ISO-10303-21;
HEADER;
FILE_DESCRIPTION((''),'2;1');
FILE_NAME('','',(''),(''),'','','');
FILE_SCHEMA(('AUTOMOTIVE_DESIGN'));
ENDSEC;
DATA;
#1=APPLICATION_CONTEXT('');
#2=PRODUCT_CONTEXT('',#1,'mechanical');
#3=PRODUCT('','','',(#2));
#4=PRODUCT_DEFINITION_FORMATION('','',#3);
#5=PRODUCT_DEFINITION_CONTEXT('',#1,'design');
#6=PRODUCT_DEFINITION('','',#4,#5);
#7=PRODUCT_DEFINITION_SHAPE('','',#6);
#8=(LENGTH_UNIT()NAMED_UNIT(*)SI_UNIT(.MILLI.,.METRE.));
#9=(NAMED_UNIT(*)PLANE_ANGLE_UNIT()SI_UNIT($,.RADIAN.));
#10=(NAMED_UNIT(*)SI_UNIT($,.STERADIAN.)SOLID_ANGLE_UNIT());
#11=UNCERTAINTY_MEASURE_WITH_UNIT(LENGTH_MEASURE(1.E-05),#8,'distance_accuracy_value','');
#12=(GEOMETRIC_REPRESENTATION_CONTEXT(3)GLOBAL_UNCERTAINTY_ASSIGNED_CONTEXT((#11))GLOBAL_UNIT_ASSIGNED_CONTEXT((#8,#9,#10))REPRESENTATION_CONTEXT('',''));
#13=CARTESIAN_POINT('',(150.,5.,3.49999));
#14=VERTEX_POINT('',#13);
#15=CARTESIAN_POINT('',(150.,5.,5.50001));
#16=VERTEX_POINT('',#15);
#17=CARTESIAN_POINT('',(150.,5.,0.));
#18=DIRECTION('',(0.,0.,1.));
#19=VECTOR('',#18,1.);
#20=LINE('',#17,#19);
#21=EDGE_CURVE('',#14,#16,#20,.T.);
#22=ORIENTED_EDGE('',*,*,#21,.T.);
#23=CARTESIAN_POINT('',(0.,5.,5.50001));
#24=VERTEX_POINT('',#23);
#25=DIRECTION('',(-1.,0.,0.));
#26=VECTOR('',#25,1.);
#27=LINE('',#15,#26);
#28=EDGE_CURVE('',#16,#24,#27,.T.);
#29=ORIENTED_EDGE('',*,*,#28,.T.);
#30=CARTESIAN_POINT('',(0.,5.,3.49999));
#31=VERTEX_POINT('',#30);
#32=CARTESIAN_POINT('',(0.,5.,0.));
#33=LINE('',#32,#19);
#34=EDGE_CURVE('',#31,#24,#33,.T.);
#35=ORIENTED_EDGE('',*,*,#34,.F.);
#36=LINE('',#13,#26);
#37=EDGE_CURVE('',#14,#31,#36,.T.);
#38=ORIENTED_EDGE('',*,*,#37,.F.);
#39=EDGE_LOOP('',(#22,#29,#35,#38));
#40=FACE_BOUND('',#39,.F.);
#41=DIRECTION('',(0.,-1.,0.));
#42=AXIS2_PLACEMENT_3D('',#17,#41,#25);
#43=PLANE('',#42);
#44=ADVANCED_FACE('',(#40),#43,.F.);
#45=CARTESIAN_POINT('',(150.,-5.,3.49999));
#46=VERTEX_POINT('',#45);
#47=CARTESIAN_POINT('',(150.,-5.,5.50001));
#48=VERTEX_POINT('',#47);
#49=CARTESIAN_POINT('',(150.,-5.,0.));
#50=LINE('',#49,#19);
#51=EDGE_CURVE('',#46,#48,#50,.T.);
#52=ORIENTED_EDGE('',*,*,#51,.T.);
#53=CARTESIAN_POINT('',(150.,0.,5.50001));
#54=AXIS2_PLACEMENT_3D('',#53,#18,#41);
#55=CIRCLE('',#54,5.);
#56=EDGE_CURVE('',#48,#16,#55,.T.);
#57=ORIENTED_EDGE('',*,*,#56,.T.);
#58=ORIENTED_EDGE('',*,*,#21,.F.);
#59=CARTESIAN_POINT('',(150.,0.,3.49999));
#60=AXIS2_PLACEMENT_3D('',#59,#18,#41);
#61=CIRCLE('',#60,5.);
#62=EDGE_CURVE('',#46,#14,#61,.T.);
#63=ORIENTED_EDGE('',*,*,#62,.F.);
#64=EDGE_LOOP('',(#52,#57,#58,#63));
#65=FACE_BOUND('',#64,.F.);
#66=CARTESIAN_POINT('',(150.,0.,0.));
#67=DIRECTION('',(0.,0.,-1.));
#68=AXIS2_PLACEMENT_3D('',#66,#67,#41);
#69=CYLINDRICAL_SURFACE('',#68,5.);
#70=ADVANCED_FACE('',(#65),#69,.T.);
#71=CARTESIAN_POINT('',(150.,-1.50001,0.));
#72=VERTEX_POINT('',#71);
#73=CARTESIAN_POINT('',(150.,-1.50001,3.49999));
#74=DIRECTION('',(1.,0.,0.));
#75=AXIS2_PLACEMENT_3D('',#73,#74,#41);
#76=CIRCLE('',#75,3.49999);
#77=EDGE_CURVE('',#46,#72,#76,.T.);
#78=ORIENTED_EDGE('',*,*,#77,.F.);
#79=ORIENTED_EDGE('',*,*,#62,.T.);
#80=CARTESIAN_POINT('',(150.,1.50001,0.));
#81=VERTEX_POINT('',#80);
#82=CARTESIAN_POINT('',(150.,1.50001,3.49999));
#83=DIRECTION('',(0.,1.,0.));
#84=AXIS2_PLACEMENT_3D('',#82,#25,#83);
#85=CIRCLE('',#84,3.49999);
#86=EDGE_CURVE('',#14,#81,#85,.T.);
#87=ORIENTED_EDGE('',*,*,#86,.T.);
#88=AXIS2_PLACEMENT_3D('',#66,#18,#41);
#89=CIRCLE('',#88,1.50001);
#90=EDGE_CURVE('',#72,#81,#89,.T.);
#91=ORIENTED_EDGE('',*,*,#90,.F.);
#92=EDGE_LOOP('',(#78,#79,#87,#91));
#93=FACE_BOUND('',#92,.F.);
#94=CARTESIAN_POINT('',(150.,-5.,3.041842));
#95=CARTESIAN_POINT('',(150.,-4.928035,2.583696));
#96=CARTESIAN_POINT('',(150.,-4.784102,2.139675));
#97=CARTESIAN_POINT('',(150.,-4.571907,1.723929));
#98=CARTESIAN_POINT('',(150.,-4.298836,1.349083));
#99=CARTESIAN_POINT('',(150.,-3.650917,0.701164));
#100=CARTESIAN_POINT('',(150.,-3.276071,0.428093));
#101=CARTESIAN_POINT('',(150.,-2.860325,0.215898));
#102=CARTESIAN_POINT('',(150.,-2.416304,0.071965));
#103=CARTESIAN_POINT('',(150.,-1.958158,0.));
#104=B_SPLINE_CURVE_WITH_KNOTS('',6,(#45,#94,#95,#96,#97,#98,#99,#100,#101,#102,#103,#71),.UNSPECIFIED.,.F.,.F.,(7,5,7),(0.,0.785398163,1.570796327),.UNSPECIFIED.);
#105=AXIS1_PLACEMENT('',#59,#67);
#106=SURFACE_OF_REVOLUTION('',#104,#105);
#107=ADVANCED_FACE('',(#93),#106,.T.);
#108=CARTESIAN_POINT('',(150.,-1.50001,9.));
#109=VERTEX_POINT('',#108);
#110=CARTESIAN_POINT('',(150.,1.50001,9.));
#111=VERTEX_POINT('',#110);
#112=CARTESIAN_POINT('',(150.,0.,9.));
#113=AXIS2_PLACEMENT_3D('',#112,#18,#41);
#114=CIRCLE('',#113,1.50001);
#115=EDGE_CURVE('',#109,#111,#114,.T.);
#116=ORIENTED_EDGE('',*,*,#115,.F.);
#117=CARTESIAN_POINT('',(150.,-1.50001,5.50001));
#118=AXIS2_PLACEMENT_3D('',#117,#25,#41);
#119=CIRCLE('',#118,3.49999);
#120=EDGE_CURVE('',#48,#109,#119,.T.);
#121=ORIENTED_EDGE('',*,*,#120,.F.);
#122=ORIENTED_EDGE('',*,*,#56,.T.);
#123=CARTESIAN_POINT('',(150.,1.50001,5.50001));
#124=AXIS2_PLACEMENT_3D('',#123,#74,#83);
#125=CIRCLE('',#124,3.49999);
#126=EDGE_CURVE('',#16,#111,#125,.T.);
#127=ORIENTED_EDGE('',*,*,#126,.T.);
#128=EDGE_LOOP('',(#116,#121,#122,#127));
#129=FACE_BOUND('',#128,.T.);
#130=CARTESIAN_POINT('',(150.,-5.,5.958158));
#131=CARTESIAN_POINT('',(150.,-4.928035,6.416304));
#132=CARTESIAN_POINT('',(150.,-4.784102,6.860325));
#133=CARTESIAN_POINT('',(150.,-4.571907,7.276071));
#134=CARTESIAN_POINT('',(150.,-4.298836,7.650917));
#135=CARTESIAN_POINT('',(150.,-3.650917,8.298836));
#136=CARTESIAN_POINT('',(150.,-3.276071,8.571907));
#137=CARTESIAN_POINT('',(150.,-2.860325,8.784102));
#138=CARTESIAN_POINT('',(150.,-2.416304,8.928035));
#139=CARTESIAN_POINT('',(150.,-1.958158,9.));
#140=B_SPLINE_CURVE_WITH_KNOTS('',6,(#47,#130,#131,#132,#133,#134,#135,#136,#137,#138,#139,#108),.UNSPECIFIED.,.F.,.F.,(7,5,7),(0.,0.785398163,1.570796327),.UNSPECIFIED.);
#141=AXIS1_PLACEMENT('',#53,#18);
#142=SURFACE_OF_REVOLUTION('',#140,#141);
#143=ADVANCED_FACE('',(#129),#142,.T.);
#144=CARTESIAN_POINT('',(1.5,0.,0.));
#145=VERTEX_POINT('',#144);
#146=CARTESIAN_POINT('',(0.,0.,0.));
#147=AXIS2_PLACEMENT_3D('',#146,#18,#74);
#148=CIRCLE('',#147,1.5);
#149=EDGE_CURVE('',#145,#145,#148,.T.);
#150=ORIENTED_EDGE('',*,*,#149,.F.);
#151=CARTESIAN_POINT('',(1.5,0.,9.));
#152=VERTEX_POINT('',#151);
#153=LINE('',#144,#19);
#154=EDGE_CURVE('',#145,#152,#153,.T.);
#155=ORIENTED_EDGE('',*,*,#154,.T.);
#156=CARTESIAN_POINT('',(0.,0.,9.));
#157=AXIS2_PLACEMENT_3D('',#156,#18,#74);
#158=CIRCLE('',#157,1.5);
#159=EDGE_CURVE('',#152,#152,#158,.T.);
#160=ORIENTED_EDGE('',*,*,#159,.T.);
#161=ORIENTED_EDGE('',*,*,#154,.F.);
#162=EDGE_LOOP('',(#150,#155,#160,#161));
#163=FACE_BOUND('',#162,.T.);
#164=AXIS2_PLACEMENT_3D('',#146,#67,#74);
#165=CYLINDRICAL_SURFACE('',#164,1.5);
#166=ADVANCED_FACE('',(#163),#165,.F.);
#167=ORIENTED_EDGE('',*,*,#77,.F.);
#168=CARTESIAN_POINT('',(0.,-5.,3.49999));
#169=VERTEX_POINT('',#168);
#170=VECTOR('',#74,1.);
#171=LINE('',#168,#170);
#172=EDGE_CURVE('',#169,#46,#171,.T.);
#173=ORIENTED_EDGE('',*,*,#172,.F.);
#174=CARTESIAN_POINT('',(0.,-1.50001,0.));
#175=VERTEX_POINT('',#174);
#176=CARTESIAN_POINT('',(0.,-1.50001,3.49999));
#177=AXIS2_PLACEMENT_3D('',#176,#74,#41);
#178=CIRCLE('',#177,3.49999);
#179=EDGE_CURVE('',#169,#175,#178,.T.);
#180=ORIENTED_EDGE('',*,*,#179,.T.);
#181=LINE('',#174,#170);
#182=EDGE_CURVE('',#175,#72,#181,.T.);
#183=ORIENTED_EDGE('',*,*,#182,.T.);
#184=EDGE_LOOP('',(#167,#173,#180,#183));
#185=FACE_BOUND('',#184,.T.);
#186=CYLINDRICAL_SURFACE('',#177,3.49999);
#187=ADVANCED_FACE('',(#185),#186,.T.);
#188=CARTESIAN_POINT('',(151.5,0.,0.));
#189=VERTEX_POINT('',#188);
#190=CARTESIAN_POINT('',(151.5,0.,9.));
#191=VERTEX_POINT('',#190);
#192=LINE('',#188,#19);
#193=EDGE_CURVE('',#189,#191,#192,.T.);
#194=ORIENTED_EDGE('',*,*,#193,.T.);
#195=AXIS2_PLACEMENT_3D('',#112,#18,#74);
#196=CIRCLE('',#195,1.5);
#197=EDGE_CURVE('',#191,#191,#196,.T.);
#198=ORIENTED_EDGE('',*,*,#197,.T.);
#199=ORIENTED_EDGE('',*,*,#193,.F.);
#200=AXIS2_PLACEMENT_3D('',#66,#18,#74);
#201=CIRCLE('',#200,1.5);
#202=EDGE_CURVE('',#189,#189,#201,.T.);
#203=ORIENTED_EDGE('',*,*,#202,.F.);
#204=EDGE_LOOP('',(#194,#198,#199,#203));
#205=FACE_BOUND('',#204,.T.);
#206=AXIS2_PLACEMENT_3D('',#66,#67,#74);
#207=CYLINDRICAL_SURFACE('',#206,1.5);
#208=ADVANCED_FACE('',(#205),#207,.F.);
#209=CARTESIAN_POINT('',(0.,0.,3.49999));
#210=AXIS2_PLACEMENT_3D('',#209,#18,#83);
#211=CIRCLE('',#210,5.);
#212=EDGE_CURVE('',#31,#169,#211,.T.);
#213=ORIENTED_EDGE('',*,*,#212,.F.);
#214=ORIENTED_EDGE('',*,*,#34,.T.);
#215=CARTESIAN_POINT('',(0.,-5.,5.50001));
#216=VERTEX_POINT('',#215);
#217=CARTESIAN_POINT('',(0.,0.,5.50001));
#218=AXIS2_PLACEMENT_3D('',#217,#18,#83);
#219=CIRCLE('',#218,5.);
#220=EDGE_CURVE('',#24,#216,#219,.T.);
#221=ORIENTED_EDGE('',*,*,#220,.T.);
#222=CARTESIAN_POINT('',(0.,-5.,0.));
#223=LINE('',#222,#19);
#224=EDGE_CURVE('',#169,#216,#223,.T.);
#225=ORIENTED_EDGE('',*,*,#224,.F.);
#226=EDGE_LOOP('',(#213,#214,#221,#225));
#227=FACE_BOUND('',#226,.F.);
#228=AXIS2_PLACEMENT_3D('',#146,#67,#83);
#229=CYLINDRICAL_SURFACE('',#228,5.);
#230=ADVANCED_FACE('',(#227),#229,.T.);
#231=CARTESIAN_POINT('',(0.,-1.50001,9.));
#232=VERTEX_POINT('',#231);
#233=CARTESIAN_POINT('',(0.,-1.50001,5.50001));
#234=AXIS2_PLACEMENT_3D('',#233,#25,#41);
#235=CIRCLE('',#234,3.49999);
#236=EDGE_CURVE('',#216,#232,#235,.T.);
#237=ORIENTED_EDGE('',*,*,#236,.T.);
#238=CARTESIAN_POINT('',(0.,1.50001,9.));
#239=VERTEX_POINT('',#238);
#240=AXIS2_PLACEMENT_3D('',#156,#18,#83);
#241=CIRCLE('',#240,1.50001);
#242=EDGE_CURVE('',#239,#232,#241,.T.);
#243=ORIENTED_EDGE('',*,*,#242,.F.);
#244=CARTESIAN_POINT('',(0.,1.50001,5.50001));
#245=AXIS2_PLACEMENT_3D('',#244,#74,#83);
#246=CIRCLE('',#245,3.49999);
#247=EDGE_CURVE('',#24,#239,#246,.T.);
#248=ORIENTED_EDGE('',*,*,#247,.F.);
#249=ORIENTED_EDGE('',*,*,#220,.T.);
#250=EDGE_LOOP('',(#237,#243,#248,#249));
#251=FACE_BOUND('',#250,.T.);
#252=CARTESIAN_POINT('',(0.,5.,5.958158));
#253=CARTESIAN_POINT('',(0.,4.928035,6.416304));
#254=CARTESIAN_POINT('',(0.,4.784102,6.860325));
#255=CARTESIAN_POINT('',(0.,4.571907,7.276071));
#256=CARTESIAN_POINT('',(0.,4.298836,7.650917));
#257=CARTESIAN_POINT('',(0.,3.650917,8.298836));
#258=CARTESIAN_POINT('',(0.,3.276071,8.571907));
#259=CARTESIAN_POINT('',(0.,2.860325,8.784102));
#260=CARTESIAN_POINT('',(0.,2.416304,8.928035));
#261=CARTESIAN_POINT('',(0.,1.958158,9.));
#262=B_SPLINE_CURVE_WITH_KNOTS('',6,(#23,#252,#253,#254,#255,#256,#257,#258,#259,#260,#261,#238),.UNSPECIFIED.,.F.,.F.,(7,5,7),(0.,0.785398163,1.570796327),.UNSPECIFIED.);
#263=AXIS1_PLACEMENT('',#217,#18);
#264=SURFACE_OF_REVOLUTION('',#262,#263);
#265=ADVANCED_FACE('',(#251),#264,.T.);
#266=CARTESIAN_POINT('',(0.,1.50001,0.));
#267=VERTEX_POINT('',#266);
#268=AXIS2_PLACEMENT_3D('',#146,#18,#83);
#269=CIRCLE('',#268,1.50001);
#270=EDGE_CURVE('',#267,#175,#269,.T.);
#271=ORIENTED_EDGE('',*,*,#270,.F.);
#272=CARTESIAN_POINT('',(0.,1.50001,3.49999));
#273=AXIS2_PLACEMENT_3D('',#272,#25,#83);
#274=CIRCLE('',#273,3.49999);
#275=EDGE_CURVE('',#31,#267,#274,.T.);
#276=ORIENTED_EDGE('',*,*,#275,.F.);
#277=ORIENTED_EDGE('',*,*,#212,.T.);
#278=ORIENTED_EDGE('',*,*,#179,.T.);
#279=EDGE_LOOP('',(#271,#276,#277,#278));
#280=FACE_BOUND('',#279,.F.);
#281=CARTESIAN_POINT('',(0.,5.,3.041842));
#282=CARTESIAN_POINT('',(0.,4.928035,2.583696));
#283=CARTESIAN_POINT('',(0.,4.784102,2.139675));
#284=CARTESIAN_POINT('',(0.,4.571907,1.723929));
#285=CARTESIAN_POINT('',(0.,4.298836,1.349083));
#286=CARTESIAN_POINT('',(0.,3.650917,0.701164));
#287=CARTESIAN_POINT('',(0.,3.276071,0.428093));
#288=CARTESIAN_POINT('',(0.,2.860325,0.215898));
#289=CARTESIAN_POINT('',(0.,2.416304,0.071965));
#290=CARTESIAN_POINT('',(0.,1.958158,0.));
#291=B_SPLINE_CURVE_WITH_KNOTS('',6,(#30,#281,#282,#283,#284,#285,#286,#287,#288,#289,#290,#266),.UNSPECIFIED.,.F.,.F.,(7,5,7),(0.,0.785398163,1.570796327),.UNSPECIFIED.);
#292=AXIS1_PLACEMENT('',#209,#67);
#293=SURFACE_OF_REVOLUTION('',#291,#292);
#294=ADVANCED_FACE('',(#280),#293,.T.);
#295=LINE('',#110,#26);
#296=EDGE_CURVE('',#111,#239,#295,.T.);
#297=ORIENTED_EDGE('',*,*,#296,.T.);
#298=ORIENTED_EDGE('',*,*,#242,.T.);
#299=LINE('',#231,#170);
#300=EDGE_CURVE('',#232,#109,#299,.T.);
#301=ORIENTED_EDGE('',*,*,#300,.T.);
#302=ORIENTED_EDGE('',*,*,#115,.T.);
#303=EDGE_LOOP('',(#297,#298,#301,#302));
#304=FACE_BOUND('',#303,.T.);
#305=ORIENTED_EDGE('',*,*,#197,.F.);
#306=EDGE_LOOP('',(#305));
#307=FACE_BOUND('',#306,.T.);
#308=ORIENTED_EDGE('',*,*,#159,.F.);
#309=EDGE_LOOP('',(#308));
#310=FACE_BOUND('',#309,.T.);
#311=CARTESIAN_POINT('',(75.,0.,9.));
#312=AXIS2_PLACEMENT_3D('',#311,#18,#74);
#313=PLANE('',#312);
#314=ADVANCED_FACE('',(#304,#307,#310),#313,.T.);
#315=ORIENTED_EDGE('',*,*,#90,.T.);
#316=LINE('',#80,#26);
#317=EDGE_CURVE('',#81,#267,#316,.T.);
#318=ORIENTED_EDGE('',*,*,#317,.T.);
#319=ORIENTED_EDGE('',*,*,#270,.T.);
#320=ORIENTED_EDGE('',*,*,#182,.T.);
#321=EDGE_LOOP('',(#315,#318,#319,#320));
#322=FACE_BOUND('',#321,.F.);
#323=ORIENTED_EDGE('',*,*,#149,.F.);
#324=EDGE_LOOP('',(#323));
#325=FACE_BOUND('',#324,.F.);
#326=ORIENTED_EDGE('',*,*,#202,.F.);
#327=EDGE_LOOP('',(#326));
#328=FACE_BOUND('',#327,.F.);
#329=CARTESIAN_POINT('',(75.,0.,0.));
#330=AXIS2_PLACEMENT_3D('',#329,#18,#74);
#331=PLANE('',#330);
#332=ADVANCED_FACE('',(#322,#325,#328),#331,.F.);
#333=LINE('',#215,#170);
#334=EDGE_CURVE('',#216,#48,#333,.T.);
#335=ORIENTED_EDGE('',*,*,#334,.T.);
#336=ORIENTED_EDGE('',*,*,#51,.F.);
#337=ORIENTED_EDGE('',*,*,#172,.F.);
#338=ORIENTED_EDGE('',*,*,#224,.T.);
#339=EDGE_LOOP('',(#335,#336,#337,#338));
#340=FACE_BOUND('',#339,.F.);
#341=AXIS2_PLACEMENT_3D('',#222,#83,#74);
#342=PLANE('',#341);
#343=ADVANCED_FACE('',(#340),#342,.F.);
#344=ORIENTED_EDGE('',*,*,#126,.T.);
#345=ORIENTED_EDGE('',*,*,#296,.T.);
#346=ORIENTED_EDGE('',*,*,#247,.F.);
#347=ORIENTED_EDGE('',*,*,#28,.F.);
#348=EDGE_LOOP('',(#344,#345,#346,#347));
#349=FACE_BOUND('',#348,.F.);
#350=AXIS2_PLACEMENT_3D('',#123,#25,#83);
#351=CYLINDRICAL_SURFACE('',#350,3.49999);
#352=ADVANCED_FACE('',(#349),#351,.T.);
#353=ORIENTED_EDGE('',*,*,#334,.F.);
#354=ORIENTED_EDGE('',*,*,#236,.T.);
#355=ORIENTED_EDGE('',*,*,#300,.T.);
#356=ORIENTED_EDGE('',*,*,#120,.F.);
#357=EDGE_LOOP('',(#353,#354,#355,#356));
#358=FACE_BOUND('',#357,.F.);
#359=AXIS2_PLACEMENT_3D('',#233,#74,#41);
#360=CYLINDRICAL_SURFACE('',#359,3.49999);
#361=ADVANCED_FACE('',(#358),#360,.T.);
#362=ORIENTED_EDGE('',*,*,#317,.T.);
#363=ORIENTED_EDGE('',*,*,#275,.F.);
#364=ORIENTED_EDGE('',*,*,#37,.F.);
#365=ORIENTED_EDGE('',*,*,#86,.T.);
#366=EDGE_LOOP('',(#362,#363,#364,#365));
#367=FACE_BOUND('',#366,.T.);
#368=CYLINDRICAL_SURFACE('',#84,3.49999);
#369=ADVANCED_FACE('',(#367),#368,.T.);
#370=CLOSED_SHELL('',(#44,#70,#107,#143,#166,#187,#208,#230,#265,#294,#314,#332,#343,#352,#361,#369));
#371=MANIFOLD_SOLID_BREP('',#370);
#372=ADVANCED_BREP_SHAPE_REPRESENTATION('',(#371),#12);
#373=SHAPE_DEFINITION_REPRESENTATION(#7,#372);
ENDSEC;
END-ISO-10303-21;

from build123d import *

# Parameters (mm, degrees)
F0_R     = 1.5
F1_DEPTH = 9
F2_R     = 3.49999


# Not quite as in the source:
# - a fillet or chamfer is up to 0.001 mm smaller than in the source, because OpenCascade refuses the exact size


with BuildPart() as f1:
    # F0 (on Top) → F1 (new body)
    with BuildSketch(Plane.XY):
        with BuildLine():
            Line((150, 5), (0, 5))
            ThreePointArc((0, 5), (-5, 0), (0, -5))
            Line((0, -5), (150, -5))
            ThreePointArc((150, -5), (155, 0), (150, 5))
        make_face()
        Circle(F0_R, mode=Mode.SUBTRACT)
        with Locations((150, 0)):
            Circle(F0_R, mode=Mode.SUBTRACT)
    extrude(amount=F1_DEPTH)

    # F2 (radius 3.5 in the source; OpenCascade refuses exactly that, so slightly less here)
    f2_edges = [f1.edges().sort_by_distance(p)[0] for p in [
        (75, 5, 9),
        (75, -5, 0),
    ]]
    fillet(f2_edges, radius=F2_R)


solid = f1.part
